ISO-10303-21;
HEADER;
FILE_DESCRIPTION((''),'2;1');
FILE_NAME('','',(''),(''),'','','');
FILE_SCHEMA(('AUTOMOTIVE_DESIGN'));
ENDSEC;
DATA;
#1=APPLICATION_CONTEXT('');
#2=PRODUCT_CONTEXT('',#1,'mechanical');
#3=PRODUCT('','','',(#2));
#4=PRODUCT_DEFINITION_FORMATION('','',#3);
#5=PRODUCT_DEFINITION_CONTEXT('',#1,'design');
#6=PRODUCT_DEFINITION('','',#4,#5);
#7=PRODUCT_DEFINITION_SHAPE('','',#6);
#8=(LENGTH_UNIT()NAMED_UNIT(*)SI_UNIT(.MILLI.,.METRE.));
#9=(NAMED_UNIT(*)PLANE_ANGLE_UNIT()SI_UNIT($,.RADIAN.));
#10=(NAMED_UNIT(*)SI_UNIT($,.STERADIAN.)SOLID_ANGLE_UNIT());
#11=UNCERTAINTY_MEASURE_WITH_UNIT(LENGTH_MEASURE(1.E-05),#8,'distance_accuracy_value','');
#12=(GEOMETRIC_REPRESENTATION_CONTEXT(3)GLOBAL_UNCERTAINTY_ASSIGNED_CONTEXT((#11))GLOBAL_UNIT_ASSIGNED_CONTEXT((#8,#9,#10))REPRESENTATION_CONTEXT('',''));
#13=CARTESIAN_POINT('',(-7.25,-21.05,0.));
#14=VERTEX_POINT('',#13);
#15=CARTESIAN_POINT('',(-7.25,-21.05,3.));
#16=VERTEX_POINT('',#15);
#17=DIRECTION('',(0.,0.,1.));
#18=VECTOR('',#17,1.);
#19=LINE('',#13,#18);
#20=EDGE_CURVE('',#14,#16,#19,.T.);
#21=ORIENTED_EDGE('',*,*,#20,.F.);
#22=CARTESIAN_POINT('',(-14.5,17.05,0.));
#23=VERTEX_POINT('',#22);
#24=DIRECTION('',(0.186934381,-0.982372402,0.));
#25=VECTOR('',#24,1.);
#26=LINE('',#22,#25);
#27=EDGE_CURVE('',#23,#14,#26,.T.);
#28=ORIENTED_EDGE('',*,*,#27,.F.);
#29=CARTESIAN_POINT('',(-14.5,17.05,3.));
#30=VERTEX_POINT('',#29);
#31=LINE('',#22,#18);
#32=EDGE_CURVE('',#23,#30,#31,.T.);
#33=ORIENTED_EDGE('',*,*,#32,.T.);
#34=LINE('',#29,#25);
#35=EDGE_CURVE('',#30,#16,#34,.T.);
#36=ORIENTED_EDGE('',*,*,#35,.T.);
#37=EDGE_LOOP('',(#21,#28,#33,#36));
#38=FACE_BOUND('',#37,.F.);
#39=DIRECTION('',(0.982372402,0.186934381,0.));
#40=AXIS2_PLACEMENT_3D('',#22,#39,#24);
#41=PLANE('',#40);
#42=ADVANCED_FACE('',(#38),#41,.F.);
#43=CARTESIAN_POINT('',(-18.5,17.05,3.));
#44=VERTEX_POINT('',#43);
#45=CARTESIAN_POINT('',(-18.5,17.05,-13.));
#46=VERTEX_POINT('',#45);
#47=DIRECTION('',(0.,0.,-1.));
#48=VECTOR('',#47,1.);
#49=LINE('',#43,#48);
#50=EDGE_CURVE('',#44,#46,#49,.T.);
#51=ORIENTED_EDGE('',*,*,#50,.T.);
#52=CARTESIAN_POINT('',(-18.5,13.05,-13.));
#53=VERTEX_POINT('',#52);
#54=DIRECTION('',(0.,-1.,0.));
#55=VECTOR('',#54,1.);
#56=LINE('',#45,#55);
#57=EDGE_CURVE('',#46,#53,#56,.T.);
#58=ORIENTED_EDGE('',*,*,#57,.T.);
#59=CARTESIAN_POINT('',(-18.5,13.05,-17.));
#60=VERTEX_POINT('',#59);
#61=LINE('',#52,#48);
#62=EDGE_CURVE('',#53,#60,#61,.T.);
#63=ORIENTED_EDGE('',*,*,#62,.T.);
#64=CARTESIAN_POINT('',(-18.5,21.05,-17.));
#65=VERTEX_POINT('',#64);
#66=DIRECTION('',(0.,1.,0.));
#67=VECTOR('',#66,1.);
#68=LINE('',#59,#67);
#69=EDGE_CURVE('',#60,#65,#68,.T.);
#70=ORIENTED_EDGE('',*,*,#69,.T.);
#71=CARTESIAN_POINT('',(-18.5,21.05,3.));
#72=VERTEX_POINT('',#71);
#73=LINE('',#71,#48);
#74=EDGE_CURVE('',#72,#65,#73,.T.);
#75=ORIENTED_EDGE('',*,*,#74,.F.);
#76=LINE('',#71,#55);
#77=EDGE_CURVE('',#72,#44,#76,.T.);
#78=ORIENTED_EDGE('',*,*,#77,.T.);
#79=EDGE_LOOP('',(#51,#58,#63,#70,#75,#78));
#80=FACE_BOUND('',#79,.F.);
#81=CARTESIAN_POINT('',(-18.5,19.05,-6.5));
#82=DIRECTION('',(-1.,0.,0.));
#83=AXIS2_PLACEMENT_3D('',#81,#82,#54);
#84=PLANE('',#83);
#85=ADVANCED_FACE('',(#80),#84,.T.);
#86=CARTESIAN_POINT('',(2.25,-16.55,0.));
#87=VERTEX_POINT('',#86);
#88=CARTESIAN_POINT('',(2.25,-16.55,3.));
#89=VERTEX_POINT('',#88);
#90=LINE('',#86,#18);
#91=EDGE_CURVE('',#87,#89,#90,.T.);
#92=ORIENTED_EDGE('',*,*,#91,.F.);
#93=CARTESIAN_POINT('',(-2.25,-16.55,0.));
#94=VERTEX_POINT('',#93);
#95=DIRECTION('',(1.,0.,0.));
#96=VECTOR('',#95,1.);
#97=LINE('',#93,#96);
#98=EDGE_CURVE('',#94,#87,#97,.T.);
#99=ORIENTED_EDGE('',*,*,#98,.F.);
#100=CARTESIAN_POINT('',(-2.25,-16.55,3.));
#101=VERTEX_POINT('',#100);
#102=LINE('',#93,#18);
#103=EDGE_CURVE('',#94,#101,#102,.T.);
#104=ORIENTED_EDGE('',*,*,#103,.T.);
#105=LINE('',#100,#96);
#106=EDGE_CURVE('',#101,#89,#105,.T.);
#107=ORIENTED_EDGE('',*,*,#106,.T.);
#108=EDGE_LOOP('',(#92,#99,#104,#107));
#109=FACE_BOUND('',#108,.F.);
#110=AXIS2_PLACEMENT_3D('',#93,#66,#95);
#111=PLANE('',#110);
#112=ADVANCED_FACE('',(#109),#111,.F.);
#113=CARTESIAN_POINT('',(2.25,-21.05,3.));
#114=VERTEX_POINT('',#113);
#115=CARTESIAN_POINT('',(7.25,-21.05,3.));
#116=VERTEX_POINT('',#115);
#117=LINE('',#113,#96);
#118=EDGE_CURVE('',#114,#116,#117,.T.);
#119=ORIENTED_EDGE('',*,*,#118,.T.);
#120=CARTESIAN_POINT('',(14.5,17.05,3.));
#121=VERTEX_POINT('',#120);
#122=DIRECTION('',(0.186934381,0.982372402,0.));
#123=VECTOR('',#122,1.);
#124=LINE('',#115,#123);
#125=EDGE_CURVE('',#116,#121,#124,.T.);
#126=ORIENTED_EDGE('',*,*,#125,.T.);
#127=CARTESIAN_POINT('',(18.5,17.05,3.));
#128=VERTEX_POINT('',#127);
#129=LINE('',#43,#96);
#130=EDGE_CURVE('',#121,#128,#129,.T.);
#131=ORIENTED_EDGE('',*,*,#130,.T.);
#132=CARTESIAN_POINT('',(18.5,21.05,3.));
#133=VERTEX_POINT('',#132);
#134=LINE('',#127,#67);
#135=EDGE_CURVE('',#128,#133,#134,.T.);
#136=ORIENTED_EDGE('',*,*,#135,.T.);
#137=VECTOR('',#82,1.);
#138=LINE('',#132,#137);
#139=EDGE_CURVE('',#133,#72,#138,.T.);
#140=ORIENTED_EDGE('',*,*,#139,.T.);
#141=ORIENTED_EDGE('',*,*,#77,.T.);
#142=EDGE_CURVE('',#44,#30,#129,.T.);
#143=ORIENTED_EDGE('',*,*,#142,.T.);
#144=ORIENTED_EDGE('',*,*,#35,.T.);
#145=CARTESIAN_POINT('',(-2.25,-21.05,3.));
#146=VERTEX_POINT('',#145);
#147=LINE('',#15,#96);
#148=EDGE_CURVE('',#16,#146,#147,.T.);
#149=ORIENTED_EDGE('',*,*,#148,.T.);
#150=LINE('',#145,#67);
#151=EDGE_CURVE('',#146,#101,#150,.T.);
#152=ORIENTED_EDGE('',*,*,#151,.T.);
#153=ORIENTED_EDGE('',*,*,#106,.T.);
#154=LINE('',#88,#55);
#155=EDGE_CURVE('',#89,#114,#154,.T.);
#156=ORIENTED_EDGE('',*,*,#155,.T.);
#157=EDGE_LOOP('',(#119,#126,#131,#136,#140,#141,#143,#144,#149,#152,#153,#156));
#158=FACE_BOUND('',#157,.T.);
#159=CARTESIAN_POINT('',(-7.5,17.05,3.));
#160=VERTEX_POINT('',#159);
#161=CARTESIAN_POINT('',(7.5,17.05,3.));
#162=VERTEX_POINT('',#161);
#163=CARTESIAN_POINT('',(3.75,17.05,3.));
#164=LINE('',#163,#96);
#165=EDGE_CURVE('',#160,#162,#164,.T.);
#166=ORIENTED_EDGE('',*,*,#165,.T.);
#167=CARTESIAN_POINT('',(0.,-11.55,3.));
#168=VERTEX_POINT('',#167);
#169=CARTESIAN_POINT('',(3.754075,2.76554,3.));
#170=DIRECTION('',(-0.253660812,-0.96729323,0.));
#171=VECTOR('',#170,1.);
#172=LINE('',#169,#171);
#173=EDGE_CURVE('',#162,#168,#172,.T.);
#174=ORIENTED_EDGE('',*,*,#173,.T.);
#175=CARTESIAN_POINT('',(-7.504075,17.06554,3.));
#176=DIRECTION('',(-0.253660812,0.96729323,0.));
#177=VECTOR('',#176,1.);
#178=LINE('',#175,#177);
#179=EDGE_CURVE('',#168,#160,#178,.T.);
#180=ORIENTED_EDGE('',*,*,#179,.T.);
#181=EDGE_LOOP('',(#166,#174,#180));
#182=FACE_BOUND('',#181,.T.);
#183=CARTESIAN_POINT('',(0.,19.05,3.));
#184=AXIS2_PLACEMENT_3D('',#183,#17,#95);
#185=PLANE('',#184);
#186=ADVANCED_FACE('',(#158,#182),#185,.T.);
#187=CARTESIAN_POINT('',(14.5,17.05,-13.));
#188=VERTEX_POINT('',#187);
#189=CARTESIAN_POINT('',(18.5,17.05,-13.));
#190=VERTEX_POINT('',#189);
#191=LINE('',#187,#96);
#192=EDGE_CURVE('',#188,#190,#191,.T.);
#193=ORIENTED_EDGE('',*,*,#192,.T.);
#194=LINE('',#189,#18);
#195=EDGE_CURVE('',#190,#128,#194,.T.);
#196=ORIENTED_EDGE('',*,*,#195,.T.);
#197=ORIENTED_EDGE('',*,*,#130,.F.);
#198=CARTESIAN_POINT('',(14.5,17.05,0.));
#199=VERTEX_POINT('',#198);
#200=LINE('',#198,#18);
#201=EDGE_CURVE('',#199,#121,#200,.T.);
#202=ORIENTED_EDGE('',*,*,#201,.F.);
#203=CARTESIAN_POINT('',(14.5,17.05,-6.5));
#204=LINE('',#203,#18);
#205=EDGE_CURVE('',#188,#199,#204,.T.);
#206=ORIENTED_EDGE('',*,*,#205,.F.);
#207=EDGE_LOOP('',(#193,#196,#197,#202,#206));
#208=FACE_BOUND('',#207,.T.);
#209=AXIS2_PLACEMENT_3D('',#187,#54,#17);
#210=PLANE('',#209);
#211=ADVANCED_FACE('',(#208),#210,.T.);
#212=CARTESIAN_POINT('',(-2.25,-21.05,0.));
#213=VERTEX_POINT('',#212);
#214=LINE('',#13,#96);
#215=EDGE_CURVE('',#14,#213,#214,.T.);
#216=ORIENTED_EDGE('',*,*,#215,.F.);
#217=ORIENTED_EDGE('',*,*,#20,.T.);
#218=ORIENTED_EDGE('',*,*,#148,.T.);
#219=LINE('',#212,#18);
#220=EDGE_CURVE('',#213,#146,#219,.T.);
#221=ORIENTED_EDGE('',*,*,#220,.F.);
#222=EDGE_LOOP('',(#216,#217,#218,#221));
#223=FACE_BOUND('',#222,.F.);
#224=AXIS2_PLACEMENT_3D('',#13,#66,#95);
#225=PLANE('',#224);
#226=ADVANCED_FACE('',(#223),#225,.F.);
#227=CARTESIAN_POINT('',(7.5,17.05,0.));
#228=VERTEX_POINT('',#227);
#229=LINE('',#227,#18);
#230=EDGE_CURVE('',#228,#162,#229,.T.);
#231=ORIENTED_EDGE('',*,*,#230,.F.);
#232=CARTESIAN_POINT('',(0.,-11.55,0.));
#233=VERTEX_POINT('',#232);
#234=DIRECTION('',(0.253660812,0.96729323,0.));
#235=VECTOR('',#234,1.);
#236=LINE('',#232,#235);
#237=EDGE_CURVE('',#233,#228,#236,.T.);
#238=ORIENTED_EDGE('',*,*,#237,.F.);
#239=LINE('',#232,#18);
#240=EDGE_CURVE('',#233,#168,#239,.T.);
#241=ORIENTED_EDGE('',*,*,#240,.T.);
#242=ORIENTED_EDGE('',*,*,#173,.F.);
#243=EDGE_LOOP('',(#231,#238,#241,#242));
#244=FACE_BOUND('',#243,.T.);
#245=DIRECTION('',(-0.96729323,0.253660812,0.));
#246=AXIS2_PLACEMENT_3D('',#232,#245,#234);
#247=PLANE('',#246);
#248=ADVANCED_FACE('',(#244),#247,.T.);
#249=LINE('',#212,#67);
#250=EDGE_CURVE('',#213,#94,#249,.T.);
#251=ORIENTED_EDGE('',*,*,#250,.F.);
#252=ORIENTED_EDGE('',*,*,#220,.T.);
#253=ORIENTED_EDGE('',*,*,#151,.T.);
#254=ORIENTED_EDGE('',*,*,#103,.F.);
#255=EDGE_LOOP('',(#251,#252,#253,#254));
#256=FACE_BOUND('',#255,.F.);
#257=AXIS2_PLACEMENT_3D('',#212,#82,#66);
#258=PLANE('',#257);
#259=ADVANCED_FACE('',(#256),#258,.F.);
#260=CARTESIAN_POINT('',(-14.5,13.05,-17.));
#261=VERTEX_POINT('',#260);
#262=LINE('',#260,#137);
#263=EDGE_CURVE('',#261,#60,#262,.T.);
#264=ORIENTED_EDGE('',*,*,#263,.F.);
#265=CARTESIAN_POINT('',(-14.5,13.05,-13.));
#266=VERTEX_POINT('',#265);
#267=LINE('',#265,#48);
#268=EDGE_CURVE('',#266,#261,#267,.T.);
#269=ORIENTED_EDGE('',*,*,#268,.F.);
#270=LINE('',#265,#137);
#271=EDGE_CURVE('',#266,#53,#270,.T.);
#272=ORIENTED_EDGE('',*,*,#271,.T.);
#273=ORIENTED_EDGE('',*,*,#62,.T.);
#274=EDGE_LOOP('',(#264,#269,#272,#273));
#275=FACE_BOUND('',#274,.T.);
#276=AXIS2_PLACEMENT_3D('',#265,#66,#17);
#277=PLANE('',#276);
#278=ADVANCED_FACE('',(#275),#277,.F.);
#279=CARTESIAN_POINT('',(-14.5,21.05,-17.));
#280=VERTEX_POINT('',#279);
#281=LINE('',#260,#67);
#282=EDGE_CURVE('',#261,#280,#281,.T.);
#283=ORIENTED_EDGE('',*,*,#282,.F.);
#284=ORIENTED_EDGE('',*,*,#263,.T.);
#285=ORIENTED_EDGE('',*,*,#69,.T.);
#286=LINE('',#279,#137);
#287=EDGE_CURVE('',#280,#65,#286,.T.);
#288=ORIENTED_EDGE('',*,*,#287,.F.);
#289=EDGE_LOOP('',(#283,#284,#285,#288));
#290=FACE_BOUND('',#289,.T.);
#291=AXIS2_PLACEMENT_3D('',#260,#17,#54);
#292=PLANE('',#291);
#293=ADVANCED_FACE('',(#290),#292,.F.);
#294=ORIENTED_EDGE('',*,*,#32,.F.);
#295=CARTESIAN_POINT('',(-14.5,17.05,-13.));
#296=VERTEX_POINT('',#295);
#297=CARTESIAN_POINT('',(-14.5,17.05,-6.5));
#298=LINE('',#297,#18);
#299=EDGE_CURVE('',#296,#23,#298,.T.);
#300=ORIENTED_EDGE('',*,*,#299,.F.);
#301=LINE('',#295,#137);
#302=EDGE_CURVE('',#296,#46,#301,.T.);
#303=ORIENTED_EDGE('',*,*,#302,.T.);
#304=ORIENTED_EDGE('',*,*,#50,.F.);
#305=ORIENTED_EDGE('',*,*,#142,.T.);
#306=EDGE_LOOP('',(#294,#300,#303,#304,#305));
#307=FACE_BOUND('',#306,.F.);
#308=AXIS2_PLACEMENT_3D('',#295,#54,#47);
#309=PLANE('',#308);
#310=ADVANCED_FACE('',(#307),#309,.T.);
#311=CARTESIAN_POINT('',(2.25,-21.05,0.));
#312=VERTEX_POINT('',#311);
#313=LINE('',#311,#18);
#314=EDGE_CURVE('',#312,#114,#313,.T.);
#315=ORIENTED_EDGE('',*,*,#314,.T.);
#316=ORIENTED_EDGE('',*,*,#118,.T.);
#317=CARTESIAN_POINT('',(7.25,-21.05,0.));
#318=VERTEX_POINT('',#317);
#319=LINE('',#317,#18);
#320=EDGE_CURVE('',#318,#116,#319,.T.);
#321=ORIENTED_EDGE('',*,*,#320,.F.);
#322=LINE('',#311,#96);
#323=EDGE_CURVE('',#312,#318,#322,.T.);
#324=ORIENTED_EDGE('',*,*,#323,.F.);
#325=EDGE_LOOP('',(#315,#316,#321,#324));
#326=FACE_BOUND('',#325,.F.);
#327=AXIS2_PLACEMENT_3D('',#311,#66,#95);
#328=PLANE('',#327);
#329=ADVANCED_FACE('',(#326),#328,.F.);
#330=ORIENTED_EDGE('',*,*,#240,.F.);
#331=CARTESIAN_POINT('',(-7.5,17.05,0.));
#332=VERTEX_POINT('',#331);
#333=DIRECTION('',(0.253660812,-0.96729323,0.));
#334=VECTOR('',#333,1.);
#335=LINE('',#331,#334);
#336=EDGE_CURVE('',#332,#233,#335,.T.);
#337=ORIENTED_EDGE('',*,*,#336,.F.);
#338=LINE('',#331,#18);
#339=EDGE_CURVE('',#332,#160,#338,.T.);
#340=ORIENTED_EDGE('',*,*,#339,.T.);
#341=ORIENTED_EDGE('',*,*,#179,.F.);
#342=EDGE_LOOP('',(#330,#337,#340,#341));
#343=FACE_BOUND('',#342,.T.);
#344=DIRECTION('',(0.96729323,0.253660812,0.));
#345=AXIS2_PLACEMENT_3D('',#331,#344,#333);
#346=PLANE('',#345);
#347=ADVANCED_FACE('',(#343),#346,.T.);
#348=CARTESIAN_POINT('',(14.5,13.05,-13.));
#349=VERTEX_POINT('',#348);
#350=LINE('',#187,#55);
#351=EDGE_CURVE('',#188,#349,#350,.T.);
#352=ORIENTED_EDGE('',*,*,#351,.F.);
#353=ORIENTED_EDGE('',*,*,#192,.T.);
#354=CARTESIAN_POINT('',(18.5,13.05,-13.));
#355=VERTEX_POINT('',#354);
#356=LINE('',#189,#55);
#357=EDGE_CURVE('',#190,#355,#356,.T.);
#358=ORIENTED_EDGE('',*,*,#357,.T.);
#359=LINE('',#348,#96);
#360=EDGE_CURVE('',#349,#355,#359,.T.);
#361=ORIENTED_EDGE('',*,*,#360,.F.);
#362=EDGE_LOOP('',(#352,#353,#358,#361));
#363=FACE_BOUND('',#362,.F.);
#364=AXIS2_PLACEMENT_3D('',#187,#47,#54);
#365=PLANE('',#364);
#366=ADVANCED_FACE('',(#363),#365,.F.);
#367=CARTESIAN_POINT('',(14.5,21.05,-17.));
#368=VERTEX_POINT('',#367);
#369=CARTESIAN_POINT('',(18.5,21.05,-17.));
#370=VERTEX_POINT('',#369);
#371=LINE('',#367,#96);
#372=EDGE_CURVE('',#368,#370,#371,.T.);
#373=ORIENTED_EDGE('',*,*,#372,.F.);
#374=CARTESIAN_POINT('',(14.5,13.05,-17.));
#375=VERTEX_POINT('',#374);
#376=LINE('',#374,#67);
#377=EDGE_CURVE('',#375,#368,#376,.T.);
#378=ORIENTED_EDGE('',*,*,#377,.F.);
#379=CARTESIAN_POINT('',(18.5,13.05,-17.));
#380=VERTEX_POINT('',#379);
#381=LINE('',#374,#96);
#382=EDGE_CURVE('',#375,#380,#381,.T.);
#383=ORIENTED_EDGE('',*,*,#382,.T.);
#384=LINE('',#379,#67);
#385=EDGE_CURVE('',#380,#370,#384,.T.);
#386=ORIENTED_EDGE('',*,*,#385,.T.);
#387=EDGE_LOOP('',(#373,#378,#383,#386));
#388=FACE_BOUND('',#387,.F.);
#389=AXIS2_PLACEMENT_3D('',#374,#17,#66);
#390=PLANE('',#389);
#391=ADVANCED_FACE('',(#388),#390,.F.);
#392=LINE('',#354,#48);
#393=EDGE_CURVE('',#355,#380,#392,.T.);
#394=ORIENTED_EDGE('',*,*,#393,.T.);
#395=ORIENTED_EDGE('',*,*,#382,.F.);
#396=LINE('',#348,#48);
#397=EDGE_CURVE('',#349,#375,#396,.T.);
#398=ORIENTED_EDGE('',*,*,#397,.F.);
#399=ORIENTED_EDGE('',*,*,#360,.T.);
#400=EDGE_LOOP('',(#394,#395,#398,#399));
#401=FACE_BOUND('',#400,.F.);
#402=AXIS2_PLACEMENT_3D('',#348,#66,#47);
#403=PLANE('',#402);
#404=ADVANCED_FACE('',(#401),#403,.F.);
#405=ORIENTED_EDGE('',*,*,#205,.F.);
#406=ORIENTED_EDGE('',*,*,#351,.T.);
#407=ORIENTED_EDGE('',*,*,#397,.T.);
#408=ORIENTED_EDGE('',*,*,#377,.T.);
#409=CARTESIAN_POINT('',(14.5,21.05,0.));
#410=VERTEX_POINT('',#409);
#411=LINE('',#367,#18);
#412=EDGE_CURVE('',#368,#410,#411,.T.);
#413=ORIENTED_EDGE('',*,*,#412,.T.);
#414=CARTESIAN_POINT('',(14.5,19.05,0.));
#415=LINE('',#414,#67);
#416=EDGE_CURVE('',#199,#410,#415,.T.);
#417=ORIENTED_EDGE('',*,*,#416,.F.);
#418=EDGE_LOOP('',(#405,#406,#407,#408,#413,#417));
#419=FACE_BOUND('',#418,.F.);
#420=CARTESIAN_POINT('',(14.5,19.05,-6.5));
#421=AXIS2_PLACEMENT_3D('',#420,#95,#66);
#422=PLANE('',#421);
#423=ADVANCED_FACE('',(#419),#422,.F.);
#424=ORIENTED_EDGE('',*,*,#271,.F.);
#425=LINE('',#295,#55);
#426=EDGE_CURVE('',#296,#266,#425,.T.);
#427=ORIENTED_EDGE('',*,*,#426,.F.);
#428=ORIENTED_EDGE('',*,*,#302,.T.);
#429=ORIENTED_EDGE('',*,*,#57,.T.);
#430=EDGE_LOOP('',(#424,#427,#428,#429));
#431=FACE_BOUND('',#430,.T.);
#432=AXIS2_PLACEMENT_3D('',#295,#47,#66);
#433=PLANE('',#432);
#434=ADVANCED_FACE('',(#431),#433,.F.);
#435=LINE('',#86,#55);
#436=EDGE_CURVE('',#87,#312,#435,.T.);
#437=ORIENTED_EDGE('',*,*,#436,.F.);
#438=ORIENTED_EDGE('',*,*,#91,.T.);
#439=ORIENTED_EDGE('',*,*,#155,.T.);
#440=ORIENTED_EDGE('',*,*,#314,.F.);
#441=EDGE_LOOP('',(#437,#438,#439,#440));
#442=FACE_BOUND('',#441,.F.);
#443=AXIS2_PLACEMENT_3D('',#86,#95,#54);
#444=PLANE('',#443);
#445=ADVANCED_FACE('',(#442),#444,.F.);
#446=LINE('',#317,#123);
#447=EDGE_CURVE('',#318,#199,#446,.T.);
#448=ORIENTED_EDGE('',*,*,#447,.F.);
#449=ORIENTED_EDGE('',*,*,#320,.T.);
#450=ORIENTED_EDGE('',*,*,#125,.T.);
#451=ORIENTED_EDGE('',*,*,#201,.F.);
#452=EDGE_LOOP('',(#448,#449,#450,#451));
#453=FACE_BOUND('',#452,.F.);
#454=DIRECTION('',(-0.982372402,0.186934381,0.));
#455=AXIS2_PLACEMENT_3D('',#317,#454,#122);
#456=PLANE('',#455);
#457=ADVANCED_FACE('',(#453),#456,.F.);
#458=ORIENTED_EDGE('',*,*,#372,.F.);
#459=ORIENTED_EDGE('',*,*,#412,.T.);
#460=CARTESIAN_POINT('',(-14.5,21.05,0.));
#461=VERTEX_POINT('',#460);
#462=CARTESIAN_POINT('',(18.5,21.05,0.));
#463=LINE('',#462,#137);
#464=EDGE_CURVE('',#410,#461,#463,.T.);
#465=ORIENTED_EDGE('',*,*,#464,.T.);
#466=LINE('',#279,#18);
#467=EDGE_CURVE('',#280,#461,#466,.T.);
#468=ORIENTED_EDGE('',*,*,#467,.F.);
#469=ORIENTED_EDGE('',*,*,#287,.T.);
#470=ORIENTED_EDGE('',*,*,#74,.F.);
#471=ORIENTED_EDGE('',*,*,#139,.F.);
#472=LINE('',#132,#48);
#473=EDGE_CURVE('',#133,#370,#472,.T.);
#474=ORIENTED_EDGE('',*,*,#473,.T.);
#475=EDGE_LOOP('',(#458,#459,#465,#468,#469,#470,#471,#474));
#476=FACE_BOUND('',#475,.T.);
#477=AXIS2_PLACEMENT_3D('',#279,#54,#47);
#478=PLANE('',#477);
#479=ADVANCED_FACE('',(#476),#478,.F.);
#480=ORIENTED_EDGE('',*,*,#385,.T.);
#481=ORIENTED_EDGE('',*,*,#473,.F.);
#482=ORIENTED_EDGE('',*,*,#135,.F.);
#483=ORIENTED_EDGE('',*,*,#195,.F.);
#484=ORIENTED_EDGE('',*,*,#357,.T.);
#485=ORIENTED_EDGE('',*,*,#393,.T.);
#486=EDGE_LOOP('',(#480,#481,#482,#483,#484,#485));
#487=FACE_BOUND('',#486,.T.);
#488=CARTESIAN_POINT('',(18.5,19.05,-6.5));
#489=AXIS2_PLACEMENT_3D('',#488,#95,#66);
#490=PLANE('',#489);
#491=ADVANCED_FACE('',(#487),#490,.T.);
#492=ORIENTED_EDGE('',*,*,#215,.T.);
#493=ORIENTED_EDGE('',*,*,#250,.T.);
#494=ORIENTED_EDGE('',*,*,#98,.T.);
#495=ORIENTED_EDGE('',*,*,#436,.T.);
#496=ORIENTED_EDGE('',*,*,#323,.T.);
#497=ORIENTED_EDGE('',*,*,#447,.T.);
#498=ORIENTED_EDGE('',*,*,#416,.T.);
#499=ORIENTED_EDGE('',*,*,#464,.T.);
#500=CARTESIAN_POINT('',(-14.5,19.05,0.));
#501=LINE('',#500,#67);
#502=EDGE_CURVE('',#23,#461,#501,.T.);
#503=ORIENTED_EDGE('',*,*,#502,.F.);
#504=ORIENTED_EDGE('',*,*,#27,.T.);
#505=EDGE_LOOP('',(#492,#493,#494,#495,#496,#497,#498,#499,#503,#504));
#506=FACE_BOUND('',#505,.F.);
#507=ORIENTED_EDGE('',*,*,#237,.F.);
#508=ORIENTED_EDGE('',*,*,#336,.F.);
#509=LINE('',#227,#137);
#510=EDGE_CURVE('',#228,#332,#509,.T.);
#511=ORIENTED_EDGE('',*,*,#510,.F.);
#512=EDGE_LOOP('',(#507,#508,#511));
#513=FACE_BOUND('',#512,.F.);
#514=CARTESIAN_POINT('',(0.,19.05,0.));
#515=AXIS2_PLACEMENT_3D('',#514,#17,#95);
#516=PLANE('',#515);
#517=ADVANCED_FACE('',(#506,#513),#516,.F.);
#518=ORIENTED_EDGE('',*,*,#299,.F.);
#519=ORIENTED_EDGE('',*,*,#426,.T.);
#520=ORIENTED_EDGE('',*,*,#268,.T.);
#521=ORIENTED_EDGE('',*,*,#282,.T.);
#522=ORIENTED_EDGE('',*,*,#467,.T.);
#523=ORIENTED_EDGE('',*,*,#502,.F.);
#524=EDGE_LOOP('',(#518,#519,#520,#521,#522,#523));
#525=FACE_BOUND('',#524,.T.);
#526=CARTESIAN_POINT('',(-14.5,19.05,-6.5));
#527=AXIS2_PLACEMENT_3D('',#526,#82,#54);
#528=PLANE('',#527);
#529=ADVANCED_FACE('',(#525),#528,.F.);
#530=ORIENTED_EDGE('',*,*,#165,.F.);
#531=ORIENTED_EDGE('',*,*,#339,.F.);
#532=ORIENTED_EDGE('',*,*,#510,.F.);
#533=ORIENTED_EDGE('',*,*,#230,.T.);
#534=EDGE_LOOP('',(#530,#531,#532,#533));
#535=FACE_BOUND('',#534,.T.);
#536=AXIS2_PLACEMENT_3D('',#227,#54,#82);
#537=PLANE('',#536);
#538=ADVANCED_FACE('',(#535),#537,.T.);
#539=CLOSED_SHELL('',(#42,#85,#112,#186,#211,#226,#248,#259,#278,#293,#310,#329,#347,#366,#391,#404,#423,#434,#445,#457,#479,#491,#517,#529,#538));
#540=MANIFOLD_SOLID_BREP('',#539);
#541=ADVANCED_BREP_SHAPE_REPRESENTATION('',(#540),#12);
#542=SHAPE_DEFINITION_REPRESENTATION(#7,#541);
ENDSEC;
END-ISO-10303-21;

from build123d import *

# Parameters (mm, degrees)
F1_DEPTH = 3
F3_START = 14.5
F2_W     = 4
F2_H     = 13
F3_DEPTH = 4
F6_DEPTH = 25


# Not quite as in the source:
# - a feature names something its author has since deleted; it is built from what else it names


with BuildPart() as f1:
    # F0 (on Top) → F1 (new body)
    with BuildSketch(Plane.XY):
        Polygon((-18.5, 17.05), (-14.5, 17.05), (14.5, 17.05), (18.5, 17.05), (18.5, 21.05), (-18.5, 21.05), align=None)
        Polygon((14.5, 17.05), (-14.5, 17.05), (-7.25, -21.05), (-2.25, -21.05), (-2.25, -16.55), (2.25, -16.55), (2.25, -21.05), (7.25, -21.05), align=None)
    extrude(amount=F1_DEPTH)

    # F2 (on Right) → F3 (join)
    with BuildSketch(Plane.YZ.offset(F3_START)):
        with Locations((19.05, -6.5)):
            Rectangle(F2_W, F2_H)
        Polygon((21.05, -17), (21.05, -13), (17.05, -13), (13.05, -13), (13.05, -17), align=None)
    extrude(amount=F3_DEPTH)

    # F4: F1 across plane


with BuildPart() as f1_1:
    add(f1.part)
    add(f1.part.mirror(Plane.YZ))

    # F5 (on Top) → F6 (cut)
    with BuildSketch(Plane.XY):
        Polygon((7.5, 17.05), (-7.5, 17.05), (0, -11.55), align=None)
    extrude(amount=F6_DEPTH, mode=Mode.SUBTRACT)


solid = f1_1.part
